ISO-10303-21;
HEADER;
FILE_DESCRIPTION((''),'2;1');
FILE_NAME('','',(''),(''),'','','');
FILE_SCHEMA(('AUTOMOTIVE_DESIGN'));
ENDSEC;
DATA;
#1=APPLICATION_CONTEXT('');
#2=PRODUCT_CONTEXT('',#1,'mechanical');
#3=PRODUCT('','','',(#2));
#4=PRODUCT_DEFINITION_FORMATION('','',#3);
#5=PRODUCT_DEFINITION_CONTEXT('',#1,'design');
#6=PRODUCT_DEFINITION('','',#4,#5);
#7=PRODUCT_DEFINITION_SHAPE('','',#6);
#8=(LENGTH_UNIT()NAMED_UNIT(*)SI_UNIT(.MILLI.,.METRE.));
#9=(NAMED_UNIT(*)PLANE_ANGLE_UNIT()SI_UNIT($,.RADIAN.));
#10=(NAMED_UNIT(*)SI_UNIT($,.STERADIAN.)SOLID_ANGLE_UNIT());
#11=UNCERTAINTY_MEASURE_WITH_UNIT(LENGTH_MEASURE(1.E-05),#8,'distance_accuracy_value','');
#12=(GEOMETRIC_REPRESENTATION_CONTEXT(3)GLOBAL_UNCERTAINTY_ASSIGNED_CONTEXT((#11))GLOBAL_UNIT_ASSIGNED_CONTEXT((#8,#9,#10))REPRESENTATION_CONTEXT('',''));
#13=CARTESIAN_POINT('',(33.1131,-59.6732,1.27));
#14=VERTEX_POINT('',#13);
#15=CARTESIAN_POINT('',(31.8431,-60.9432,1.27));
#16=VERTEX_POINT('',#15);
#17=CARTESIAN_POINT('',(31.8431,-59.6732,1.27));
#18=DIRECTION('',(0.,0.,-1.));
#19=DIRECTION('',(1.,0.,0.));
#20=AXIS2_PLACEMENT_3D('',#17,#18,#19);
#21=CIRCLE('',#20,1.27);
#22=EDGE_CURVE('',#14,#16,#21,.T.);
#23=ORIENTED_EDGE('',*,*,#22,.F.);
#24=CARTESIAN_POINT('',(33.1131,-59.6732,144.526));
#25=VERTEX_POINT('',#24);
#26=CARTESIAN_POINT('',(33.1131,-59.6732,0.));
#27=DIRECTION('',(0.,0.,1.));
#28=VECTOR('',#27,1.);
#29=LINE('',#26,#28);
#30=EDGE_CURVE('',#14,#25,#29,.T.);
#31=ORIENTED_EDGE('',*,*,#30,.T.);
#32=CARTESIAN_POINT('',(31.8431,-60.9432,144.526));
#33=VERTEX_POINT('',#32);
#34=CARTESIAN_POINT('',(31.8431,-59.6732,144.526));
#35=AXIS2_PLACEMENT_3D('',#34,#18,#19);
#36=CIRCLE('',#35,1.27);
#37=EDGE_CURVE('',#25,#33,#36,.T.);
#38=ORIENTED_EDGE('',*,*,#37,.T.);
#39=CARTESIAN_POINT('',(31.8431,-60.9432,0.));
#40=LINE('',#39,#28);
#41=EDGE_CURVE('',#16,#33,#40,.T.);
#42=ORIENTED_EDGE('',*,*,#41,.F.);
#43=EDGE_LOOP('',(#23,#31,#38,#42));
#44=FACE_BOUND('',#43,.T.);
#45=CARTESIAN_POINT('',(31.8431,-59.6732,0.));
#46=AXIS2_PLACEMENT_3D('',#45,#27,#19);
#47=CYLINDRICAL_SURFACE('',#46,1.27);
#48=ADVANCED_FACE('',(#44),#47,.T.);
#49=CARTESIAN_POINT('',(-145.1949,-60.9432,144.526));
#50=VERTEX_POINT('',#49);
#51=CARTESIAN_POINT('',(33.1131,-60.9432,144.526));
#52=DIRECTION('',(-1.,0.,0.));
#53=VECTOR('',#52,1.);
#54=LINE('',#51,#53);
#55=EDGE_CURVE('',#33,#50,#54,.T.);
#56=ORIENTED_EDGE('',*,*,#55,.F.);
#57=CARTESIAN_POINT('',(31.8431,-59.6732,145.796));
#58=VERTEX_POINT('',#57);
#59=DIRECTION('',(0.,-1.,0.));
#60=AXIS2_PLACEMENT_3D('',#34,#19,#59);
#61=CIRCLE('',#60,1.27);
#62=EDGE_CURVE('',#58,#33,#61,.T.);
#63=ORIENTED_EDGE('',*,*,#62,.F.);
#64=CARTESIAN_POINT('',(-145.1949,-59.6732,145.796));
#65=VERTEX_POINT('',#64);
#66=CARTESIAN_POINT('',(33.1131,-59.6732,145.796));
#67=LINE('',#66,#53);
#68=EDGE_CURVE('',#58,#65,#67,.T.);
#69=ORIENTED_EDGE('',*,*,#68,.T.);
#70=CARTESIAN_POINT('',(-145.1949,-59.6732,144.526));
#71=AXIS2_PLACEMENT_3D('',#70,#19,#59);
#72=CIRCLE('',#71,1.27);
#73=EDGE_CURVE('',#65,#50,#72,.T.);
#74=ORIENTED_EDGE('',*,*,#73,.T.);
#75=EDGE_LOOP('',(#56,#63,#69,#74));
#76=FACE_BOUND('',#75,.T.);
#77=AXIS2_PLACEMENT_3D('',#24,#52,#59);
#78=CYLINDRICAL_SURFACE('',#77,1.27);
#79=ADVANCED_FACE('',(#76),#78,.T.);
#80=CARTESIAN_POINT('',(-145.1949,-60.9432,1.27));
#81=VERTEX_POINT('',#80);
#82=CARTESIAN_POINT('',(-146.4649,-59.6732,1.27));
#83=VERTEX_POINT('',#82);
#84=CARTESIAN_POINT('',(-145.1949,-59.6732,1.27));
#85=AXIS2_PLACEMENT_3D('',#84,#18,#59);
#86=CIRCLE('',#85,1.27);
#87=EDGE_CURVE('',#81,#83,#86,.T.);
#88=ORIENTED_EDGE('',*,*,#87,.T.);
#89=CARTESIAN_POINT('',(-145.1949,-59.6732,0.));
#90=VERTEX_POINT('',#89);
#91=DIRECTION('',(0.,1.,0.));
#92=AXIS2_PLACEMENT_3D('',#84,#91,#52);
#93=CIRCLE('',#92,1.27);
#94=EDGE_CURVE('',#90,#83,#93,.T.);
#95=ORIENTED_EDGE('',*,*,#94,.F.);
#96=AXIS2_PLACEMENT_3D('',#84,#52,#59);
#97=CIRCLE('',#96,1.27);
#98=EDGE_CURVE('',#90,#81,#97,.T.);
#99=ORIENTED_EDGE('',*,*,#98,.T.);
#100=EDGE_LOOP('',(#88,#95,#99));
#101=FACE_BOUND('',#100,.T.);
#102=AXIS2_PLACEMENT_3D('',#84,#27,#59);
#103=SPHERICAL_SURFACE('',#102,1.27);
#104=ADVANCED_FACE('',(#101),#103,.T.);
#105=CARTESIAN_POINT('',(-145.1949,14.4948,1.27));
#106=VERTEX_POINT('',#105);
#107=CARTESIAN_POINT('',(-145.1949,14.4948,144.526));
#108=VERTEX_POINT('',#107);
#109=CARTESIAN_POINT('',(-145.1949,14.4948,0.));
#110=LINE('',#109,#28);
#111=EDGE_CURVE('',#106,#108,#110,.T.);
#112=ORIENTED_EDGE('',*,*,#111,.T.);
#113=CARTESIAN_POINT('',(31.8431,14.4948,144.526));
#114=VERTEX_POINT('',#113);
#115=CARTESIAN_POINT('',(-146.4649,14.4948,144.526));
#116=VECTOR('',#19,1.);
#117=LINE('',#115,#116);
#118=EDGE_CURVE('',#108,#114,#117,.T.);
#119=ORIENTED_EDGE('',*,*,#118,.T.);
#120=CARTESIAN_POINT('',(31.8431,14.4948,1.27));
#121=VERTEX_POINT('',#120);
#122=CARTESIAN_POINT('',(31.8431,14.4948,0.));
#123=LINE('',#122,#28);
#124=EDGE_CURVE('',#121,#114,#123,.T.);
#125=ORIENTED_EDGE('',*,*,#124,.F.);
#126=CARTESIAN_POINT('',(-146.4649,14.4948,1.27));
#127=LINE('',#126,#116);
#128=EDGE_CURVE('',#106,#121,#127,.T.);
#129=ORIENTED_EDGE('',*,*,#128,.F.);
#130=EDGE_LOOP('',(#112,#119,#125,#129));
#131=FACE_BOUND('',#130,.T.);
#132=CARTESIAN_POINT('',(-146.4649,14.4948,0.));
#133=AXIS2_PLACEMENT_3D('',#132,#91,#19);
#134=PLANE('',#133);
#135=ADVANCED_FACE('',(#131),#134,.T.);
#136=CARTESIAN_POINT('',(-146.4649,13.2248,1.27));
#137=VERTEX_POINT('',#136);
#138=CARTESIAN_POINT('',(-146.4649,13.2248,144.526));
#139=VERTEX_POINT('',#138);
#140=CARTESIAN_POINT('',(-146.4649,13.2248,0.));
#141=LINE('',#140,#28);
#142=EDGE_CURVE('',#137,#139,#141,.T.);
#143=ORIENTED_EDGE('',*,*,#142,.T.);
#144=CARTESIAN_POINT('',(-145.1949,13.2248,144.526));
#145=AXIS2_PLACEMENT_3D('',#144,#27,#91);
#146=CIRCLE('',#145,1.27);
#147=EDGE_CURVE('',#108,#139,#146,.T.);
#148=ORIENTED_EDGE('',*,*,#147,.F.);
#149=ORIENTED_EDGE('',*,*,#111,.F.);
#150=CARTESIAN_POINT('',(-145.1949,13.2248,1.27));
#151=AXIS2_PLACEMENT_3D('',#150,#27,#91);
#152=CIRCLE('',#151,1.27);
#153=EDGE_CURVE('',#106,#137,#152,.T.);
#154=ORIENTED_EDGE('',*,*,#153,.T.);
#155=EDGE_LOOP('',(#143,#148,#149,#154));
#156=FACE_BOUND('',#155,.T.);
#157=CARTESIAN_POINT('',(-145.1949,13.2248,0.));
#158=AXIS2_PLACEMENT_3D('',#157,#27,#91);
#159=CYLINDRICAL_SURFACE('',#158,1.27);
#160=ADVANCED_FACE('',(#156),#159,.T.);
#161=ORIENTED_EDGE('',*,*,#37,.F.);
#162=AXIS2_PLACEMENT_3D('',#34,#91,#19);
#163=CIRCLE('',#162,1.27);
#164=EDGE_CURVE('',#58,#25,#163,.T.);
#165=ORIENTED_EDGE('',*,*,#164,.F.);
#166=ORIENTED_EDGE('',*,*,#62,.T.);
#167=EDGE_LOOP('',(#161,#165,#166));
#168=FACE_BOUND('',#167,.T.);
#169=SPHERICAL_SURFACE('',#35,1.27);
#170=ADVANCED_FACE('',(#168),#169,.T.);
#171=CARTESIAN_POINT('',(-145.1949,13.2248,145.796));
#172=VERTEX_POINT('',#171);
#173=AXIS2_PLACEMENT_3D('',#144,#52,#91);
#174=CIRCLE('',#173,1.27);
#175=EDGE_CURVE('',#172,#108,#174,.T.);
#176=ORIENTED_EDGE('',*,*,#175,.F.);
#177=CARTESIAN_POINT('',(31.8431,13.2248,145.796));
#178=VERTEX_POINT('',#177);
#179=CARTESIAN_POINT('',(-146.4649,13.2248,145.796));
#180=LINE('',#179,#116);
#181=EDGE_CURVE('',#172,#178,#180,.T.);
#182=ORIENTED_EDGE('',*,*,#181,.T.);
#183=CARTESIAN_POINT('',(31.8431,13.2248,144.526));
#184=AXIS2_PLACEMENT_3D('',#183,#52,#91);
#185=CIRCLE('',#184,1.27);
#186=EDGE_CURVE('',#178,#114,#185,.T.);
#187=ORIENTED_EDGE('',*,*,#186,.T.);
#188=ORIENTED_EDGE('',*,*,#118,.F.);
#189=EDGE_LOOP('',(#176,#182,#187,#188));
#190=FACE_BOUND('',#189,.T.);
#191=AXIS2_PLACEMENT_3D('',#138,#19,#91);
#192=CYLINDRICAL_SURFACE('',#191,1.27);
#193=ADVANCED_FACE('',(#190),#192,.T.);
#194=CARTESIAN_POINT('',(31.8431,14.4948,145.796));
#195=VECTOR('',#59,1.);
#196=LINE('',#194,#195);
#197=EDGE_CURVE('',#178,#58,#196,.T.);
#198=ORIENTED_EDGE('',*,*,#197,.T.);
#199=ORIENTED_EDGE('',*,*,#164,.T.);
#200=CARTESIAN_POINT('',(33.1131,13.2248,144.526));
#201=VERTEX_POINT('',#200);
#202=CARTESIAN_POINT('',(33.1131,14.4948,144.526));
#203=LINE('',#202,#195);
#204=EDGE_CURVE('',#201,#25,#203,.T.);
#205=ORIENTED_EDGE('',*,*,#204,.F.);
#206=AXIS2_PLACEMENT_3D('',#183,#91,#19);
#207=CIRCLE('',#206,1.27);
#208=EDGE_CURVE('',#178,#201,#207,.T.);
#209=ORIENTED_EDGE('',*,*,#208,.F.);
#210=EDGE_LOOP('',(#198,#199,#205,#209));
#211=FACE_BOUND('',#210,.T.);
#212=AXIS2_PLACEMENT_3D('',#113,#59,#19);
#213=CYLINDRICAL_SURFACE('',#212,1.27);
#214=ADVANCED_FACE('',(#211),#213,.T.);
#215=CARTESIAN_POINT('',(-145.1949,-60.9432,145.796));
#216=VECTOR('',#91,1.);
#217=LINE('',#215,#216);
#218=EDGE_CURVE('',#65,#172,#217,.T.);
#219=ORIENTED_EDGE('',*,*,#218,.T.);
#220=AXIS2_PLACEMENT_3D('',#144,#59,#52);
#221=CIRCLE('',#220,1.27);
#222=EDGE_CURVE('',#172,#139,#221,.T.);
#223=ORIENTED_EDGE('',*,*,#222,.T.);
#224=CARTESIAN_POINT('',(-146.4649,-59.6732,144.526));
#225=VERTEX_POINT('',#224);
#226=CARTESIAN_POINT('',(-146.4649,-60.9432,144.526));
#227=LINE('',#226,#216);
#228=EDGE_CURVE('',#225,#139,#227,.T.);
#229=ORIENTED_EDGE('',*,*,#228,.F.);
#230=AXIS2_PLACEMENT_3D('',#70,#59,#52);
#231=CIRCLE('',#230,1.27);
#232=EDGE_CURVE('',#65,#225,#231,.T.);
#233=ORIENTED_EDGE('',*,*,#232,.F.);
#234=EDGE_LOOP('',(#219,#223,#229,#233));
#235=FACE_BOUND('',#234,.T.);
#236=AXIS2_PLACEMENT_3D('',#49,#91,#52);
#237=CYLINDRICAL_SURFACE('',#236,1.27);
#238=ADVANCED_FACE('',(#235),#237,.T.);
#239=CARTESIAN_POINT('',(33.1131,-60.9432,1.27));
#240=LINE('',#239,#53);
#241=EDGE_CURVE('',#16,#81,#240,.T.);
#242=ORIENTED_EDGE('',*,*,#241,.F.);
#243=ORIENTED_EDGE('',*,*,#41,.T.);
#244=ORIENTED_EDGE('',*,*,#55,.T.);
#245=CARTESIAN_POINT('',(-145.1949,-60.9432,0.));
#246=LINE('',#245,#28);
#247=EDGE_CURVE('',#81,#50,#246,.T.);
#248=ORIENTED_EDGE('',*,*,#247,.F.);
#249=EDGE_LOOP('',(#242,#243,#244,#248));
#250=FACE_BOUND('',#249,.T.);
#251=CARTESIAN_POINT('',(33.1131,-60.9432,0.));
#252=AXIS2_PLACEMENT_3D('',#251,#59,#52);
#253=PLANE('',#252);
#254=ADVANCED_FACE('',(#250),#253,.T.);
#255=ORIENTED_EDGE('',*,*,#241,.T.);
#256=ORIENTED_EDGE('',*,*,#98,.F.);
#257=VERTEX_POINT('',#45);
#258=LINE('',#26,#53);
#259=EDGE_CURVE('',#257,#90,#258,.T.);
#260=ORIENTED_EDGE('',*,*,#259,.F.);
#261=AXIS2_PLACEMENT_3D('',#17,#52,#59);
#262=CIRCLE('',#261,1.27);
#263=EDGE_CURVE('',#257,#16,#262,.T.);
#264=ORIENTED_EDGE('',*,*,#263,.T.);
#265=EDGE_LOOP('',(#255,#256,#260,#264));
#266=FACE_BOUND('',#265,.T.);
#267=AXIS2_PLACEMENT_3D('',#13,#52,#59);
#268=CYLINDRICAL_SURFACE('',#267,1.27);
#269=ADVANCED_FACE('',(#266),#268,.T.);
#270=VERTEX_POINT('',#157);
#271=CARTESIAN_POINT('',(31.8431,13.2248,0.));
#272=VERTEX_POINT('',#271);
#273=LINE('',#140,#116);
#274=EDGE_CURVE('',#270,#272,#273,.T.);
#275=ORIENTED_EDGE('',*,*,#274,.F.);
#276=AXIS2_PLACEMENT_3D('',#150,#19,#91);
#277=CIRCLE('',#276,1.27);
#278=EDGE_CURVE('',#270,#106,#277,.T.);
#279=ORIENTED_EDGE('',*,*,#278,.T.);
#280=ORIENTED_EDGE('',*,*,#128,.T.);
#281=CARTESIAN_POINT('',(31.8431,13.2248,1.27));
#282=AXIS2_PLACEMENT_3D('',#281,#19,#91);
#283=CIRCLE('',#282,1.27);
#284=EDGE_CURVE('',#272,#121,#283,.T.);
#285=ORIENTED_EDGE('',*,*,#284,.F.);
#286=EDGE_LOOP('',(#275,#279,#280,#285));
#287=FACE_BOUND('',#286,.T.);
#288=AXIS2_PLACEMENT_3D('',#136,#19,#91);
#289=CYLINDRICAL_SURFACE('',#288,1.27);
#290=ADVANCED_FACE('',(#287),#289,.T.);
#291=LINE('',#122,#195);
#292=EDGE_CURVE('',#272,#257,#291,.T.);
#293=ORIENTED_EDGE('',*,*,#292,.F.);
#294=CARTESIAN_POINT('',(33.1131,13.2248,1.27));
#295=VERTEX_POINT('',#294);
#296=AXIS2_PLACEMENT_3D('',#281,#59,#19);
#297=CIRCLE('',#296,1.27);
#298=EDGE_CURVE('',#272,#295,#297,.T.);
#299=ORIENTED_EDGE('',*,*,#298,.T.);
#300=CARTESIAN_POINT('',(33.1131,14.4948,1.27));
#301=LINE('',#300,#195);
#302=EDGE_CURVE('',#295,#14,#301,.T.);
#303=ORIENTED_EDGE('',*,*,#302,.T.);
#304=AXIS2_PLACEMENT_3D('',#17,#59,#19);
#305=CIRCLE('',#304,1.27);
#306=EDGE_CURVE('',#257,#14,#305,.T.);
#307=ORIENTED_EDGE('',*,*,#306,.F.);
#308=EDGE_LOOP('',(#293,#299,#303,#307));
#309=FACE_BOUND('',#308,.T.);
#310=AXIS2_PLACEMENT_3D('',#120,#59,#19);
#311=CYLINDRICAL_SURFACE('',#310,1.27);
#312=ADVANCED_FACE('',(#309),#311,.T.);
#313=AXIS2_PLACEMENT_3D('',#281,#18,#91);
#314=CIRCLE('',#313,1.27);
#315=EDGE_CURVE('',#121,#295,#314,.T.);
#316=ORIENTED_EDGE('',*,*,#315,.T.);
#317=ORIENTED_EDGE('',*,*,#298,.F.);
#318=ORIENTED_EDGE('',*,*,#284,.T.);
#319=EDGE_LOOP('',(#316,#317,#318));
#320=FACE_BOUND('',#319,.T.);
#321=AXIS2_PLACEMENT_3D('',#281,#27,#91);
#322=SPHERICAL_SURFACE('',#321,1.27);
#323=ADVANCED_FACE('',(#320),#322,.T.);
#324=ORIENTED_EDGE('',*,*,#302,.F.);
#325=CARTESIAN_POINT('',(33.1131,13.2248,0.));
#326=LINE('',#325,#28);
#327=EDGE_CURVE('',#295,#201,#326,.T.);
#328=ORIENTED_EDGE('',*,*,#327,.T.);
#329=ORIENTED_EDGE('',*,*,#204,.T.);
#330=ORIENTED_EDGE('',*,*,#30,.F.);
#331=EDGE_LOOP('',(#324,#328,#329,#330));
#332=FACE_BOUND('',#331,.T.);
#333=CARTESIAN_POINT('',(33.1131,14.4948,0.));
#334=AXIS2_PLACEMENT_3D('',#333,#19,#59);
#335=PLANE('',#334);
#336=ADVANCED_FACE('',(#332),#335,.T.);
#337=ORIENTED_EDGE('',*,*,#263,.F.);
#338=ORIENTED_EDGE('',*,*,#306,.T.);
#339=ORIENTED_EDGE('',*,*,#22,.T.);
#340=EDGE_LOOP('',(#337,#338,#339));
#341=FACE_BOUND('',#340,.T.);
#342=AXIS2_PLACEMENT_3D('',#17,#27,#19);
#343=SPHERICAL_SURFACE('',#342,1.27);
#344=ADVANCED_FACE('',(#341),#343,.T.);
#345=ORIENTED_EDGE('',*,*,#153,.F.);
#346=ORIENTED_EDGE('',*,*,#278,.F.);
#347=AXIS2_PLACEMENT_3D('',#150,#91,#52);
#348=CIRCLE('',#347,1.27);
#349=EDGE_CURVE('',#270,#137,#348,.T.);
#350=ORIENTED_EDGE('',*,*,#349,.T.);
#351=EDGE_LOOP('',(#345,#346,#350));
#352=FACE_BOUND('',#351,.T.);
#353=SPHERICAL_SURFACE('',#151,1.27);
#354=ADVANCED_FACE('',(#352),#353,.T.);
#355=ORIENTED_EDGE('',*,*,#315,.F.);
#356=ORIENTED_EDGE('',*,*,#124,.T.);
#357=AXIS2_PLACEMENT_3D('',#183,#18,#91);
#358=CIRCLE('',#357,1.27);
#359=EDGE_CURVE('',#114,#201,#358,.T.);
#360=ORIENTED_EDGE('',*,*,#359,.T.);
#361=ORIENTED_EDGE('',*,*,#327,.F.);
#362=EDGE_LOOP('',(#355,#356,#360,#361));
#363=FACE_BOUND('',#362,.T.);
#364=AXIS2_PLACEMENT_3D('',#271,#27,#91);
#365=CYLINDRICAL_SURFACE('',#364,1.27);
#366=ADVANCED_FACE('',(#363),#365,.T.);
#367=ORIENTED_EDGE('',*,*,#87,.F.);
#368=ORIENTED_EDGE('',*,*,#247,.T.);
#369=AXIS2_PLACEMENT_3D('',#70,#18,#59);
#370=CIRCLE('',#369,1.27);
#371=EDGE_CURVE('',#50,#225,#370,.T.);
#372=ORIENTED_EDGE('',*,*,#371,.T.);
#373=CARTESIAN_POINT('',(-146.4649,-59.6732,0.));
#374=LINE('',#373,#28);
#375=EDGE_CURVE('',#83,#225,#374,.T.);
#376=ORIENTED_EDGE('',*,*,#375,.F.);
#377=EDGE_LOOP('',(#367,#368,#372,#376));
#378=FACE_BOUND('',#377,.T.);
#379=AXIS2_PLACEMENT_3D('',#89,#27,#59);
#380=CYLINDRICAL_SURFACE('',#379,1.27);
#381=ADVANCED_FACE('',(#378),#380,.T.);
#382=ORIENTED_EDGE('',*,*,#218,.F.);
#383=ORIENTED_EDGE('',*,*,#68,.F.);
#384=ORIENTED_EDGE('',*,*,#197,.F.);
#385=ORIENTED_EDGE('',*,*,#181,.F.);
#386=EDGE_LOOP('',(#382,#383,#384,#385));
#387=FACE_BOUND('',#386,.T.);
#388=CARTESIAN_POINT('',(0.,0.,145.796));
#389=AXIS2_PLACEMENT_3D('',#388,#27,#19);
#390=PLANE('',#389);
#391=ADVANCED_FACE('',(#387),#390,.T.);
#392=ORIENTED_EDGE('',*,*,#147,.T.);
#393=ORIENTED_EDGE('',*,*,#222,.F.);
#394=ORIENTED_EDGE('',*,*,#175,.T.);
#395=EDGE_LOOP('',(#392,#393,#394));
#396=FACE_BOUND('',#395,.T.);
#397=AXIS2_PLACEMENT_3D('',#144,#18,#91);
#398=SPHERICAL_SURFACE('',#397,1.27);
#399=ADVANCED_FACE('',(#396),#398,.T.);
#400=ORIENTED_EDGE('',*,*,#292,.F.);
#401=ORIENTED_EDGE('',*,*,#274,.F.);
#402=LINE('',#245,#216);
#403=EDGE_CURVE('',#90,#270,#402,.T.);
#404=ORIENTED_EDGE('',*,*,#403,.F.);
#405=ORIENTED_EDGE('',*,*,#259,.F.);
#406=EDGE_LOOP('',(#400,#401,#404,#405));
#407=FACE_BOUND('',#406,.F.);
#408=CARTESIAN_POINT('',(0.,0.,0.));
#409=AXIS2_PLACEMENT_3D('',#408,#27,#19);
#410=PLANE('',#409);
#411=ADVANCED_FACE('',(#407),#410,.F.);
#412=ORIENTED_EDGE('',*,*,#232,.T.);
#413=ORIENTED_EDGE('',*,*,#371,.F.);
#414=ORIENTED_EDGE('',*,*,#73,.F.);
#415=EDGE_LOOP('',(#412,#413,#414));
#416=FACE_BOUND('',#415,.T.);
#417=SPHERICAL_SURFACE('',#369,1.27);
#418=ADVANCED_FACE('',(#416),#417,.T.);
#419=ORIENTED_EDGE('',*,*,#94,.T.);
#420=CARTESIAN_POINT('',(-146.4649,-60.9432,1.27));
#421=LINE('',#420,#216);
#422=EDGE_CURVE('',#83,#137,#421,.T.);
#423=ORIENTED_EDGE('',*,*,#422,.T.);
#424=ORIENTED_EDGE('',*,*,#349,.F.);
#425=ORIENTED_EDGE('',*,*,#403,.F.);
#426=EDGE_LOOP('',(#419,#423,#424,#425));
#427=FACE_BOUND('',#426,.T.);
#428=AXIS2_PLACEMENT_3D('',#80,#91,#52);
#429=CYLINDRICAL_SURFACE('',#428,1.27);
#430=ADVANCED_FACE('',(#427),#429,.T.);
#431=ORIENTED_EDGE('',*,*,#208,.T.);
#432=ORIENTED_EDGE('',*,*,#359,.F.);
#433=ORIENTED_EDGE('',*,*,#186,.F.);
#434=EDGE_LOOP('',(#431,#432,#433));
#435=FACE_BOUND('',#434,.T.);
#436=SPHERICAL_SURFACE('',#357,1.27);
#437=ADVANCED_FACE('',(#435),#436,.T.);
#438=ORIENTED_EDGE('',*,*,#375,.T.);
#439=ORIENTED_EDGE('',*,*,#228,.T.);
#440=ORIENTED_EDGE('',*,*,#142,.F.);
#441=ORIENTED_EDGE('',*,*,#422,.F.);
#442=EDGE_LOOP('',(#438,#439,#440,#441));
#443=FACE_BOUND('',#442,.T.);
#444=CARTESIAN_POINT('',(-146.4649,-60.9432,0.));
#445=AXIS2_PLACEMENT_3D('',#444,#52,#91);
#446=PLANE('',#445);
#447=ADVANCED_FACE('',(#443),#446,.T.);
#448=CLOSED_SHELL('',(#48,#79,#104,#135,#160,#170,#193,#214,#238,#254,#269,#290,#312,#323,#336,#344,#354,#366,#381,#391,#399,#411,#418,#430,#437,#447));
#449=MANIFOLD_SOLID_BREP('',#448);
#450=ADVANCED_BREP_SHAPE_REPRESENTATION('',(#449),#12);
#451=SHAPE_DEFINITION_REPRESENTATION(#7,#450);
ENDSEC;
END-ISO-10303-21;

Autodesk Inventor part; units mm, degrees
ref_plane "YZ Plane" through (0, 0, 0) normal (1, 0, 0) x (0, 1, 0)
ref_plane "XZ Plane" through (0, 0, 0) normal (0, 1, 0) x (-1, 0, 0)
ref_plane "XY Plane" through (0, 0, 0) normal (0, 0, 1) x (1, 0, 0)
sketch "Sketch1" plane through (0, 0, 0) normal (0, 0, 1) x (1, 0, 0)
  line L0 (-146.4649, 14.4948) -> (33.1131, 14.4948)
  line L1 (33.1131, 14.4948) -> (33.1131, -60.9432)
  line L2 (33.1131, -60.9432) -> (-146.4649, -60.9432)
  line L3 (-146.4649, -60.9432) -> (-146.4649, 14.4948)
  line L4 (30.5731, 14.7488) -> (-143.9249, 14.7488) projected
  line L5 (-143.9249, -61.1972) -> (30.5731, -61.1972) projected
  line L6 (-147.2269, 11.4468) -> (-147.2269, -57.8952) projected
  point P0 (0, 0)
  point P1 (-146.4649, -23.2242)
  point P2 (-147.2269, -23.2242)
  point P3 (-56.6759, 14.4948)
  point P4 (-56.6759, 14.7488)
  dimension "d0" = 179.578
  dimension "d1" = 75.438
extrude "Extrusion1" add sketch "Sketch1" along normal blind 145.796
fillet "Fillet1" radius 1.27 12 edges at (-146.4649, 14.4948, 72.898) (33.1131, 14.4948, 72.898) (-56.6759, 14.4948, 0) (-56.6759, 14.4948, 145.796) (33.1131, -60.9432, 72.898) (33.1131, -23.2242, 0) (33.1131, -23.2242, 145.796) (-146.4649, -60.9432, 72.898) (-56.6759, -60.9432, 0) (-56.6759, -60.9432, 145.796) (-146.4649, -23.2242, 0) (-146.4649, -23.2242, 145.796)
properties part number "Electrical_Yuasa_Np18-12_Middle"
